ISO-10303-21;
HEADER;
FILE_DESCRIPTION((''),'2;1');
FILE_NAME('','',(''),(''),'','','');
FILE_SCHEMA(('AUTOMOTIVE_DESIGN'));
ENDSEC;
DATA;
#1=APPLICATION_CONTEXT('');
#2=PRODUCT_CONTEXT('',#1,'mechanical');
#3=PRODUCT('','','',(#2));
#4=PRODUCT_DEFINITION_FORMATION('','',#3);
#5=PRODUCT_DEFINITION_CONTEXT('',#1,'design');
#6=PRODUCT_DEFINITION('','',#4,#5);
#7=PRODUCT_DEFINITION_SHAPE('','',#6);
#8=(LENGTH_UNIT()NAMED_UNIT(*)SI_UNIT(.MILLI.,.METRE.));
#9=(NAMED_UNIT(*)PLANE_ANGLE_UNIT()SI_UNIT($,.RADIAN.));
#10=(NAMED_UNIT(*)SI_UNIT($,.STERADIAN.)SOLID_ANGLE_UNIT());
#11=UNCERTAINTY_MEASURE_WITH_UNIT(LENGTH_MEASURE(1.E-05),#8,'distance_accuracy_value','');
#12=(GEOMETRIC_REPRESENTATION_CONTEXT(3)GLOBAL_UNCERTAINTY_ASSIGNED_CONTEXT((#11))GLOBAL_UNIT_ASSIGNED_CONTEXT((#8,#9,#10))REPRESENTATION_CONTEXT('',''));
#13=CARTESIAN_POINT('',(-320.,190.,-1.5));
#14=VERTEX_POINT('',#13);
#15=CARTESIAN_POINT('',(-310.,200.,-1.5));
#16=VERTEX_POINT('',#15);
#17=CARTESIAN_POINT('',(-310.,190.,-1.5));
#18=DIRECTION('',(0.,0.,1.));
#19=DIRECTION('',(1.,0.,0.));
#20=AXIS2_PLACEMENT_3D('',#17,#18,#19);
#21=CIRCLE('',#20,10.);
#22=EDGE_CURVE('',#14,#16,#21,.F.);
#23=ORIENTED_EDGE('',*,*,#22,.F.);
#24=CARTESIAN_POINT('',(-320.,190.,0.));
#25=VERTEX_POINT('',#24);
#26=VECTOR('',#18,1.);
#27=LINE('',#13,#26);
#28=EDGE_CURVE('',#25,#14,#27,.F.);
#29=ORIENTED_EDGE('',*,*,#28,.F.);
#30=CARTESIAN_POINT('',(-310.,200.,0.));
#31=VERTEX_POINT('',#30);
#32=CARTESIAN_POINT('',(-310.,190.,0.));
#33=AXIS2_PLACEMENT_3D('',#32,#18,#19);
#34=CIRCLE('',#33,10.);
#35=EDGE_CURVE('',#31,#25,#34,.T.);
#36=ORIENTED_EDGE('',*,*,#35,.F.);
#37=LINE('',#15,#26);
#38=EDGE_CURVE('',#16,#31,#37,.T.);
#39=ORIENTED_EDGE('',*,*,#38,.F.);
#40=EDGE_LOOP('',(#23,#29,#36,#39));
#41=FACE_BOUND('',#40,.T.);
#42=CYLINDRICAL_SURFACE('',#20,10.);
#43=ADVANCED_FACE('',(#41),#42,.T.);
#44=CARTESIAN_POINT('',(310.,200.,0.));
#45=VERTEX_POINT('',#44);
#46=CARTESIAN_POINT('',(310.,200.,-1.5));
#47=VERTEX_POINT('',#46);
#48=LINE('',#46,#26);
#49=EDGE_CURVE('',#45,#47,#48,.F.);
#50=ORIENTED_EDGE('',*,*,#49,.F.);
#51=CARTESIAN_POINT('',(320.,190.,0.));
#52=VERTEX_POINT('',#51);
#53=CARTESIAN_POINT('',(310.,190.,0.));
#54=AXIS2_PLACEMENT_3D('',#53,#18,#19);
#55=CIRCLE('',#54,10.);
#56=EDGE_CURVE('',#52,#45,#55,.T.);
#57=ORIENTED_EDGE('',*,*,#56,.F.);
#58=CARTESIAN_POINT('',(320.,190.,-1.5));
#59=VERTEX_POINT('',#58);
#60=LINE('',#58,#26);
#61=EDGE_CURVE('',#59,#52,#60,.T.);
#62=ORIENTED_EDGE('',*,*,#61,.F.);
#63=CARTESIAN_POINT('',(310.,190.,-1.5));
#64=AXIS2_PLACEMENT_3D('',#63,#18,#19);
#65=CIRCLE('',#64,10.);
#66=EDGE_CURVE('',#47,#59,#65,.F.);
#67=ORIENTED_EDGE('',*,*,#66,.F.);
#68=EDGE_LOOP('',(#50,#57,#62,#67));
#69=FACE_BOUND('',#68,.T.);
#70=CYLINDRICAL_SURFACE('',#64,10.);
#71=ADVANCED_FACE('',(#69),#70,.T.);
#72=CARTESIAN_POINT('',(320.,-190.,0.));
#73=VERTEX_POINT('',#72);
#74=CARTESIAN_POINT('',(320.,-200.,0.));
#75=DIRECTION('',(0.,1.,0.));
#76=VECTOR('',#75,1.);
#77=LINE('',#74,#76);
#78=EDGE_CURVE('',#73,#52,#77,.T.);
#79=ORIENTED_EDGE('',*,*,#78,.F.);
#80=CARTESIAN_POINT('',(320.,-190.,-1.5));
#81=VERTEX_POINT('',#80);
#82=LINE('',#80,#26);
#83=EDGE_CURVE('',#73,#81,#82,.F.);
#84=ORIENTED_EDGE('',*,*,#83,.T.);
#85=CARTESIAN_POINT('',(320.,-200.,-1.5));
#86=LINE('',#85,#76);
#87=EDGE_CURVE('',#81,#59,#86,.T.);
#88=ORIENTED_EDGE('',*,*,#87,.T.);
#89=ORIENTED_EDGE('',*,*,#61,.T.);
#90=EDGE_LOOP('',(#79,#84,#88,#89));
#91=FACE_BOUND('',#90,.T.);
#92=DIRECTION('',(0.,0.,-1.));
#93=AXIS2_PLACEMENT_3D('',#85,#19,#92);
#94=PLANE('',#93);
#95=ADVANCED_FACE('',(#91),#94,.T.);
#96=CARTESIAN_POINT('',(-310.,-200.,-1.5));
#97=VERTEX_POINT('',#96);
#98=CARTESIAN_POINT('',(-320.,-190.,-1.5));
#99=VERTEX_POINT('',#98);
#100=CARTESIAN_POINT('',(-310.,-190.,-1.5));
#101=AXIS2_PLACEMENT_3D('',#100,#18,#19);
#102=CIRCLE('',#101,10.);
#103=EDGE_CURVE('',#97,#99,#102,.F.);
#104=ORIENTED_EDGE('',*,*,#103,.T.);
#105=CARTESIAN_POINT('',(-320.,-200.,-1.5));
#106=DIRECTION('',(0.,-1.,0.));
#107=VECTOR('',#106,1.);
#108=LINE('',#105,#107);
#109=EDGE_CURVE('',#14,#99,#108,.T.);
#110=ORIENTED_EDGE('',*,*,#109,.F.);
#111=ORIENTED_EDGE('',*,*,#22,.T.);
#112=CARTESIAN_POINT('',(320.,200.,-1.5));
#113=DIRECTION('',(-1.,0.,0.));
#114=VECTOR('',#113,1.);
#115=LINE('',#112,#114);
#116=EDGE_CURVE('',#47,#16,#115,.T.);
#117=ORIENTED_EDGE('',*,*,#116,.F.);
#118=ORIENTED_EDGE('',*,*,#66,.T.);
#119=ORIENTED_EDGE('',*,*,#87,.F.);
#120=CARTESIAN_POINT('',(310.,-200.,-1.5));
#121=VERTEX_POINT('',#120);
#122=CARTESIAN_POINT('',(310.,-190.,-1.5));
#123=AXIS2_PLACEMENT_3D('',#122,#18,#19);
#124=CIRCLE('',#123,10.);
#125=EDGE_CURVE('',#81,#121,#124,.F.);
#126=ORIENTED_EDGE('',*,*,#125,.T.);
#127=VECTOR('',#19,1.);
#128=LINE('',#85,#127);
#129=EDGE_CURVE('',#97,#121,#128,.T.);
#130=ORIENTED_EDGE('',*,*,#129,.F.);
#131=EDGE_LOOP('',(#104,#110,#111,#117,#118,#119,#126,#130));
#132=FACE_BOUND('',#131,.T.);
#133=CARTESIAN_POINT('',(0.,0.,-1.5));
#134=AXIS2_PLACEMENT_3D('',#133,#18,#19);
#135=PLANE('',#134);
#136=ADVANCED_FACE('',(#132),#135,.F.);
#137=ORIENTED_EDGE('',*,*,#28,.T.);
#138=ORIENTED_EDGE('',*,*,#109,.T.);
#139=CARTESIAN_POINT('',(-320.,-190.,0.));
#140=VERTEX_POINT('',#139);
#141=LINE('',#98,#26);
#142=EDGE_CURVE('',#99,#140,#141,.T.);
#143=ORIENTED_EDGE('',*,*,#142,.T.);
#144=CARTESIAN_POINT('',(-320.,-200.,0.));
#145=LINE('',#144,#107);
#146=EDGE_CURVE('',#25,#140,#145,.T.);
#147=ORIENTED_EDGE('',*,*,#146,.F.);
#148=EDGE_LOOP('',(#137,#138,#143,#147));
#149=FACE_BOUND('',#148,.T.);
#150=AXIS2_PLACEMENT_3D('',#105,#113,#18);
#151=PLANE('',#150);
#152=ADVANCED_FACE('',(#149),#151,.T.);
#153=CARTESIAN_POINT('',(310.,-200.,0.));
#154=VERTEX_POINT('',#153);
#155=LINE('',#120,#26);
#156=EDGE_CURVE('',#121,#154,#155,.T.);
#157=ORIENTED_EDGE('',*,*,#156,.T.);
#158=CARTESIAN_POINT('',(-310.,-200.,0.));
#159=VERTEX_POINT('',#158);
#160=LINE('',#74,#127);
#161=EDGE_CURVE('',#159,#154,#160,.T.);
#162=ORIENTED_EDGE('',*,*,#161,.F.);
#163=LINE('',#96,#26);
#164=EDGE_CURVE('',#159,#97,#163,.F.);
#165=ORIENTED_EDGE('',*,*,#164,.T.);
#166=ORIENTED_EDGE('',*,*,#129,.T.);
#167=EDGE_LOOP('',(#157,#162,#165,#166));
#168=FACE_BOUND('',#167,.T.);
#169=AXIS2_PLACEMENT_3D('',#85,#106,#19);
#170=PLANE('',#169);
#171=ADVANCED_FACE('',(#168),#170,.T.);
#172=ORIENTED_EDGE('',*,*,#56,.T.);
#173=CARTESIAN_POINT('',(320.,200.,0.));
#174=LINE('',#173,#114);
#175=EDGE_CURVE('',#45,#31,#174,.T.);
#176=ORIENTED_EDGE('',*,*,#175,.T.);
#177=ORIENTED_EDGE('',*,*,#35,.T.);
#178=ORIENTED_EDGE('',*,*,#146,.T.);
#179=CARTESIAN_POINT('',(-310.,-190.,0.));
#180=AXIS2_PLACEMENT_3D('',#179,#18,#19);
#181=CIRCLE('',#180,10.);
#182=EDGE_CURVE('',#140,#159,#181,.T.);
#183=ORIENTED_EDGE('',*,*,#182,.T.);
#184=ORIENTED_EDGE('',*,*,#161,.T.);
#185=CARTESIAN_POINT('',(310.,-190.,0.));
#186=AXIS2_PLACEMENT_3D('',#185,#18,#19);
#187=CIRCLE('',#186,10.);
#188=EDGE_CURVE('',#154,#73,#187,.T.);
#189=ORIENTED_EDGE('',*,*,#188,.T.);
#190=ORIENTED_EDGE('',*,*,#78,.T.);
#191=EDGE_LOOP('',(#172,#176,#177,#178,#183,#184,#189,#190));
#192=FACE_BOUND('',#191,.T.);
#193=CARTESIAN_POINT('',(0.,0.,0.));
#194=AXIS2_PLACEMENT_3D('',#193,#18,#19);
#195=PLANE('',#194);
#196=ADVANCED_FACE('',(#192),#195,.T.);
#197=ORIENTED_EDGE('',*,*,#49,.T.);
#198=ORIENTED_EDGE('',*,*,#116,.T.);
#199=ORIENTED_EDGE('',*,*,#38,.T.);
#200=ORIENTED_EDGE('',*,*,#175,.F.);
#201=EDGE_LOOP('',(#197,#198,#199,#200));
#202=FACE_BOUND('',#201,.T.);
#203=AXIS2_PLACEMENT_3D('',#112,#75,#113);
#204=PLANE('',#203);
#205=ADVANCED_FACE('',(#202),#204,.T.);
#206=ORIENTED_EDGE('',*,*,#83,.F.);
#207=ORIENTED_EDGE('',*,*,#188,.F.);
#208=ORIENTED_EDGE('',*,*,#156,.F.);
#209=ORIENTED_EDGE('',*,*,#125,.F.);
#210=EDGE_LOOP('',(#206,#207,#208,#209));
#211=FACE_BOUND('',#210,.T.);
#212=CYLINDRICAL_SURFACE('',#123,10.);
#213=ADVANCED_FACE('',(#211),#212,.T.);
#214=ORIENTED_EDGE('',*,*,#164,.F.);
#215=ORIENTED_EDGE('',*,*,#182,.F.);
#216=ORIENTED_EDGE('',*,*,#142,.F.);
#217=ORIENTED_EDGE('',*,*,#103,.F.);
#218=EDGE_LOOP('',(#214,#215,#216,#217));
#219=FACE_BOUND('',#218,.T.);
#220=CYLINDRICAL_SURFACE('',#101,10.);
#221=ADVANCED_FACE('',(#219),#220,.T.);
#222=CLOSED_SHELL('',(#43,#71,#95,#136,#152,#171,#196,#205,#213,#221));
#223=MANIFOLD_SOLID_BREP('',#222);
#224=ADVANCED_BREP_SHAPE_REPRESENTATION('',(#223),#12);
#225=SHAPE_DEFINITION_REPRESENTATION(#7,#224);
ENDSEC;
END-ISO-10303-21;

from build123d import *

# Parameters (mm, degrees)
SKETCH1_W          = 640
SKETCH1_H          = 400
BASE_FLANGE1_DEPTH = 1.5
FILLET1_R          = 10


# Sheet-metal steps are written as plain solids
with BuildPart() as part:
    # Sketch1 → Base-Flange1 (new body)
    with BuildSketch(Plane.XY):
        Rectangle(SKETCH1_W, SKETCH1_H)
    extrude(amount=-BASE_FLANGE1_DEPTH)

    # Fillet1
    fillet1_edges = [part.edges().sort_by_distance(p)[0] for p in [
        (-320, 200, -0.75),
        (320, 200, -0.75),
        (320, -200, -0.75),
        (-320, -200, -0.75),
    ]]
    fillet(fillet1_edges, radius=FILLET1_R)


solid = part.part
